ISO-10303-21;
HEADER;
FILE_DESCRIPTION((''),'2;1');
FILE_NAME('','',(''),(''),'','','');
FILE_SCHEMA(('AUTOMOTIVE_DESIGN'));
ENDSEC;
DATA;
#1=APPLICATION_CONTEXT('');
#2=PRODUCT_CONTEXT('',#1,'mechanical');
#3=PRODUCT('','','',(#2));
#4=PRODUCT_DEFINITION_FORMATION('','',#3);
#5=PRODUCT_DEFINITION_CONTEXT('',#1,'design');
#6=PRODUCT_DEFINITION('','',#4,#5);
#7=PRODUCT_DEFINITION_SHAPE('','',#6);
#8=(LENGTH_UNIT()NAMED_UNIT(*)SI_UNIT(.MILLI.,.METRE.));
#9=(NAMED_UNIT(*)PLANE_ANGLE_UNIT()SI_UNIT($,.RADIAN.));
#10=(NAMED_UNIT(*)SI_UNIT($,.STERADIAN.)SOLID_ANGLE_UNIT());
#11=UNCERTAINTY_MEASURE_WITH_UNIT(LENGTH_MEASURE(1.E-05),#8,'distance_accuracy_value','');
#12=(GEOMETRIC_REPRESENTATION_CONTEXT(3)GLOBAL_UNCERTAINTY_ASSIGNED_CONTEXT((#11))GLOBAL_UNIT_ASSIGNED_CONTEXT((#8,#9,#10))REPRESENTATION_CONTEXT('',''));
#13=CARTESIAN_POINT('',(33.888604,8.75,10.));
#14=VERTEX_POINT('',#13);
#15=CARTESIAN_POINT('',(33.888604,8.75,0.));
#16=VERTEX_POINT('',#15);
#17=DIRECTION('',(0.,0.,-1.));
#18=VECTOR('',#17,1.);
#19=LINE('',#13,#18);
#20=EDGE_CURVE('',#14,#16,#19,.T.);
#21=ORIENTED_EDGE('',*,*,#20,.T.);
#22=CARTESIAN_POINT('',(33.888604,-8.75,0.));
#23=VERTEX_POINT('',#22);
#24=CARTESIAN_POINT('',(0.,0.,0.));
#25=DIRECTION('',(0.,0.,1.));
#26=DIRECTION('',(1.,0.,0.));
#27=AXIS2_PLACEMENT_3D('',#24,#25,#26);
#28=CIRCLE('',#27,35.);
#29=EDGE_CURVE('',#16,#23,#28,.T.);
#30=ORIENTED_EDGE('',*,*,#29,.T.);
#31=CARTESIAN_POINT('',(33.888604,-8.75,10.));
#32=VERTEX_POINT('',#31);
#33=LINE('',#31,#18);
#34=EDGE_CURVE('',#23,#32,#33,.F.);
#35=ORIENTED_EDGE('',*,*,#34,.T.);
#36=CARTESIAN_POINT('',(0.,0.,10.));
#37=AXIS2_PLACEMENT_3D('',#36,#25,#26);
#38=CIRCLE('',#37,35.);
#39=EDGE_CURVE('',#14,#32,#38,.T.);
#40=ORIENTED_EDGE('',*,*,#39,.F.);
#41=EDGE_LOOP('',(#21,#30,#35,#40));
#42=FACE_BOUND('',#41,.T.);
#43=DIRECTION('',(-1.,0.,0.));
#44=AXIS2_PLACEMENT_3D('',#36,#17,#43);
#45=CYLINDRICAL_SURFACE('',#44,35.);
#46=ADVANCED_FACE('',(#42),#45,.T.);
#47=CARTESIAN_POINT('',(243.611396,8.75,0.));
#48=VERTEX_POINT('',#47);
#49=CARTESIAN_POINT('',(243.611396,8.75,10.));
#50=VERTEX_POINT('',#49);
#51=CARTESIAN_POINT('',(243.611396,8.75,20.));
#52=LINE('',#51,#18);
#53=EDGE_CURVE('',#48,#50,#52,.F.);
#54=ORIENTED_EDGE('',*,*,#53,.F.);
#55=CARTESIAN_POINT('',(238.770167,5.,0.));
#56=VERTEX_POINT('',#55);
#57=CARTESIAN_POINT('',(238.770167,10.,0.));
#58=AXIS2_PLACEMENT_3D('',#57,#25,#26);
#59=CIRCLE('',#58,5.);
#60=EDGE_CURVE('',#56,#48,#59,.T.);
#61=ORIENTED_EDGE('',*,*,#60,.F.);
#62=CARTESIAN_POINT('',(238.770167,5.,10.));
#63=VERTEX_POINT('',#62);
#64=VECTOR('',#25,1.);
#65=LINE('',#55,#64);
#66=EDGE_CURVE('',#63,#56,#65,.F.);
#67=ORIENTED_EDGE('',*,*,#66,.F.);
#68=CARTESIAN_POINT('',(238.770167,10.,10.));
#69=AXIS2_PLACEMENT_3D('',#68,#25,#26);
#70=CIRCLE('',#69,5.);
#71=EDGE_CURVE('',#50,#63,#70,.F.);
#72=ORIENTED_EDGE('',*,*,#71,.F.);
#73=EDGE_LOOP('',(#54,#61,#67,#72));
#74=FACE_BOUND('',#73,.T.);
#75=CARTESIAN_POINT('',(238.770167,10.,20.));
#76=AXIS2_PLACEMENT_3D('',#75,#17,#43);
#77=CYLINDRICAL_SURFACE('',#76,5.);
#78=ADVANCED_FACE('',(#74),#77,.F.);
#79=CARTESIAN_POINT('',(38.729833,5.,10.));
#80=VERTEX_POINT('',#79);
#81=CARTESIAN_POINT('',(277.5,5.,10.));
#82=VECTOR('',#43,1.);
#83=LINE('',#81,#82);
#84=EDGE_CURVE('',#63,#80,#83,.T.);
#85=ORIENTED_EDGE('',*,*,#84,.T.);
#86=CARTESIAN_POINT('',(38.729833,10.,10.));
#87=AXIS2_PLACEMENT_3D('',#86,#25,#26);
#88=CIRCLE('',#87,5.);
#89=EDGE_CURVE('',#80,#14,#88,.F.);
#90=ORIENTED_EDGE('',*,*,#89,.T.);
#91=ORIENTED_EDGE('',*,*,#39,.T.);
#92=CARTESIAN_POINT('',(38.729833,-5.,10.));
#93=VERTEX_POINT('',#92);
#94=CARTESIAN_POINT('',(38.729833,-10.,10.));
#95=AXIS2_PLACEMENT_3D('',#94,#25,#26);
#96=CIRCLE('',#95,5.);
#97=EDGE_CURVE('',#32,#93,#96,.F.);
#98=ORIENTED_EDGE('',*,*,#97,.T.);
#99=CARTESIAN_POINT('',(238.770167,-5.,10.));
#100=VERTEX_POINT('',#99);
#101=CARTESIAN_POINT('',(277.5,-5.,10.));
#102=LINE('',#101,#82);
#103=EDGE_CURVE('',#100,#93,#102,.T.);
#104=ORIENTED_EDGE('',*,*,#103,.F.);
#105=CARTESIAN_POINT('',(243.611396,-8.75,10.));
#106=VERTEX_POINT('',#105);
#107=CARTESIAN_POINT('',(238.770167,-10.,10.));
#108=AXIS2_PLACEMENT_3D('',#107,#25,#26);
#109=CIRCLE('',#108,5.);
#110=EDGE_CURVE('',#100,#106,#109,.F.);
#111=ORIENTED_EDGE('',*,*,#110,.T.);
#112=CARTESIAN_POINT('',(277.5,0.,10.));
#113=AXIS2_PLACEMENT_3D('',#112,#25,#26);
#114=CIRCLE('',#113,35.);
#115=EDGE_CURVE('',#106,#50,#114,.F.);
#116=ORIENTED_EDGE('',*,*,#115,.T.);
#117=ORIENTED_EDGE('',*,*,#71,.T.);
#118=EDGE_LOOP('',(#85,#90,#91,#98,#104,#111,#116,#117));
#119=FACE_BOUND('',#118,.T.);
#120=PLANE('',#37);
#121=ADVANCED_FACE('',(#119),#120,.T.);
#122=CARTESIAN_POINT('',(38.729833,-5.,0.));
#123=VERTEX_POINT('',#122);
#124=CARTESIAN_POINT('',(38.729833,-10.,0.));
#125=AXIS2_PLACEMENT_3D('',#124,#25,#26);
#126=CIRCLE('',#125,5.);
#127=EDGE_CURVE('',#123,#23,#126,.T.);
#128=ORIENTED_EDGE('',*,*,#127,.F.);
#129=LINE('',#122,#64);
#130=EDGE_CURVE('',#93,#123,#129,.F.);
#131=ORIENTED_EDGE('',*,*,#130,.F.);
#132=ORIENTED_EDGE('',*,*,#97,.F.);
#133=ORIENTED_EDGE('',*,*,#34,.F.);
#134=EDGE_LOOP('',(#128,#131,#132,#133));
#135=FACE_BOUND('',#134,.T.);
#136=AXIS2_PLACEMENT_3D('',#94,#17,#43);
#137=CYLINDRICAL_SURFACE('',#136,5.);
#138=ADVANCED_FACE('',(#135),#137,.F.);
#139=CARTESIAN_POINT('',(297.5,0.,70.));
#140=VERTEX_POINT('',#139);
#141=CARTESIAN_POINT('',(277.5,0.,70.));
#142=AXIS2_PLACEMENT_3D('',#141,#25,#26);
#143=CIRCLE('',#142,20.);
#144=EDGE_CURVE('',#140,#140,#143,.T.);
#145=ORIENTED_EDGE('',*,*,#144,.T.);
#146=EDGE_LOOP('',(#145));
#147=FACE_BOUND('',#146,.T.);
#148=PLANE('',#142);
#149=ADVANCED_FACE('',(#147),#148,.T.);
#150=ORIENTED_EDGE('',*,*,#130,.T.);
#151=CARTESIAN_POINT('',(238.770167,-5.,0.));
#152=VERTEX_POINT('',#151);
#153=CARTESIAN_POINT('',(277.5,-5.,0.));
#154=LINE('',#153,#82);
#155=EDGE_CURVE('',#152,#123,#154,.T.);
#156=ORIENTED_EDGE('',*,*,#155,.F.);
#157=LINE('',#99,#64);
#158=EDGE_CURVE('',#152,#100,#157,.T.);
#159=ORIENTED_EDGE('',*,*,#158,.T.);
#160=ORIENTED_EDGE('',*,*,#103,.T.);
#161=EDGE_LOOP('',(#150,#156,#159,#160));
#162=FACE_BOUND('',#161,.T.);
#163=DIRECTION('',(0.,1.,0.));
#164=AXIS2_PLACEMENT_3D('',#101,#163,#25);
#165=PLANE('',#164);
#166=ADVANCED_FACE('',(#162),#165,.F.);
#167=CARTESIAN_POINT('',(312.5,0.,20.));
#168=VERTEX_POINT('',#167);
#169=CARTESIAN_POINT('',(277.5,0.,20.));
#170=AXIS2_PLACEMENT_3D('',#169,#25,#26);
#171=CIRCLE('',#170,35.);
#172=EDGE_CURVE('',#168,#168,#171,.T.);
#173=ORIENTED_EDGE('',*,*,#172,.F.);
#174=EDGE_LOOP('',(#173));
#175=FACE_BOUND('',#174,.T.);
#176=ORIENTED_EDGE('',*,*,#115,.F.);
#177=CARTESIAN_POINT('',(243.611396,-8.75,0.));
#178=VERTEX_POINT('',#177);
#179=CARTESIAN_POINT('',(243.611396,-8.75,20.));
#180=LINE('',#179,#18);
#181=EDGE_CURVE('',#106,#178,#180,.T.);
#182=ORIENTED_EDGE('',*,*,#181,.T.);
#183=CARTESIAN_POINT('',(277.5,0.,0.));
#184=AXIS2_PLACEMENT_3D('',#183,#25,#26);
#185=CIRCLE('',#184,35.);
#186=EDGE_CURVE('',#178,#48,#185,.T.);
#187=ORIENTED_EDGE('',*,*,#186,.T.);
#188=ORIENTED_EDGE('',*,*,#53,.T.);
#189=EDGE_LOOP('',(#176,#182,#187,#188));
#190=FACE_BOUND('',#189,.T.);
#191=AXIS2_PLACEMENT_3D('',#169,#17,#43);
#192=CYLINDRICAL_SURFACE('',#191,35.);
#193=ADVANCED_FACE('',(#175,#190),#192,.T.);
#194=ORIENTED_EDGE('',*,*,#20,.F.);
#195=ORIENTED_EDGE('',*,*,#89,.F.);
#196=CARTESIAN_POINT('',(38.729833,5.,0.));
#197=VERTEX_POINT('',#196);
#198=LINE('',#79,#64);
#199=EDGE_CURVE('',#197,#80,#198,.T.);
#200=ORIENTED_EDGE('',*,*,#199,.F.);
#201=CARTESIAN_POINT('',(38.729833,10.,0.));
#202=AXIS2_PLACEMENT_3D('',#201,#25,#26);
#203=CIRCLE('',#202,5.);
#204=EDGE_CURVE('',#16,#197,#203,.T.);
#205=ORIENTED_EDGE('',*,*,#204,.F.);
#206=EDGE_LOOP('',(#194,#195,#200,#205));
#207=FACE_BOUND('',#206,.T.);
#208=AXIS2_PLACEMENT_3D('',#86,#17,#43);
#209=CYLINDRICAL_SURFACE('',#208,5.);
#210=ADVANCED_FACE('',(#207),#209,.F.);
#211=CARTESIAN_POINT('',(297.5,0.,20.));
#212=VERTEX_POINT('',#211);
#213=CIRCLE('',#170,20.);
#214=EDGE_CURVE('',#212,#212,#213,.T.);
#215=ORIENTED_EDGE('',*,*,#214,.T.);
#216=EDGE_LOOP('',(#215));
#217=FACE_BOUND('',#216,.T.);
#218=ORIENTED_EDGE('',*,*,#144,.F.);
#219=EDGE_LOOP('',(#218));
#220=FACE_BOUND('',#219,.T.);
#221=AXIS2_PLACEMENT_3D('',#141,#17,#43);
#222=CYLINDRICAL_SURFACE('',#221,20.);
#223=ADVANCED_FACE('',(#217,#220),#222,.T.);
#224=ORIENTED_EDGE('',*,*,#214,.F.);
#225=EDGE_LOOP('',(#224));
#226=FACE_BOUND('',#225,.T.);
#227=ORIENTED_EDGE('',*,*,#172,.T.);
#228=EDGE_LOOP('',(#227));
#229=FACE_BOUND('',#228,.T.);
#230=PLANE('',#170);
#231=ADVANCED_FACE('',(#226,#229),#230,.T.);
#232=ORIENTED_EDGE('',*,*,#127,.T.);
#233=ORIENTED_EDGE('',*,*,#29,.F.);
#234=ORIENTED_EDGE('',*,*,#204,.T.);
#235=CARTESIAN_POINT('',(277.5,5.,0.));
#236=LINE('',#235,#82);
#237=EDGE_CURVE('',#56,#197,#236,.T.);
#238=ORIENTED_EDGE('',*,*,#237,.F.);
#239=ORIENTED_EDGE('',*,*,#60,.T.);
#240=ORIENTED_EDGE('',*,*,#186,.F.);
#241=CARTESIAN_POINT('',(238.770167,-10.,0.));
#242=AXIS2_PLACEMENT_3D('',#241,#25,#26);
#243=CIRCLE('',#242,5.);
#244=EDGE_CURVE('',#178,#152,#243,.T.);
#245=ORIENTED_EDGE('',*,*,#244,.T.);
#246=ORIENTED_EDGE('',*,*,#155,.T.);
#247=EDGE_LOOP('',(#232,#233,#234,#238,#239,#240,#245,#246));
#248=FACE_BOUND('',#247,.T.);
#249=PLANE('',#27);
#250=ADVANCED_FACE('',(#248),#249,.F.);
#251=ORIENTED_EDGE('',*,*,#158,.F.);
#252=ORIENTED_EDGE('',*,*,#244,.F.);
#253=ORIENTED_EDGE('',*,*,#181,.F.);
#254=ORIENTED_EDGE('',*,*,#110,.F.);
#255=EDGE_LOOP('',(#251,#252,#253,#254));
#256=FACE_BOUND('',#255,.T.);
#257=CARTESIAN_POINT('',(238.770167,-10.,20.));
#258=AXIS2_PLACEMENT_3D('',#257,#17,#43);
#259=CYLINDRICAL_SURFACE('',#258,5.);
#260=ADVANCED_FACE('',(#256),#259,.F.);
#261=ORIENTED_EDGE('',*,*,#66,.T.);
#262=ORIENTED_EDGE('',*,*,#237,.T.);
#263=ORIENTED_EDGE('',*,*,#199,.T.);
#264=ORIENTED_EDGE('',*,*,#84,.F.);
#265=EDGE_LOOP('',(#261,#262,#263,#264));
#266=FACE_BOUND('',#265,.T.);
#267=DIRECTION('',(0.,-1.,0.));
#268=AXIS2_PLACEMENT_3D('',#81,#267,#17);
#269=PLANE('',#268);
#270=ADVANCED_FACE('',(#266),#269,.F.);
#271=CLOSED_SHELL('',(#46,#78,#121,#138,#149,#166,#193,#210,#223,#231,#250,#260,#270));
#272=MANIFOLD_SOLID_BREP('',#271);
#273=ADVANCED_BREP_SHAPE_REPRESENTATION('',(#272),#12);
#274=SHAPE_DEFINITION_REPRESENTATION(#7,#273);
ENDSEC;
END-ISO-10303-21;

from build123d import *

# Parameters (mm, degrees)
ESBO_O1_R                     = 35
RESSALTO_EXTRUS_O1_DEPTH      = 10
ESBO_O4_W                     = 10
ESBO_O4_H                     = 10
RESSALTO_EXTRUS_O2_DEPTH      = 277.5
FILETE3_R                     = 5
FILETE4_R                     = 5
RESSALTO_EXTRUS_O3_DEPTH      = 10
RESSALTO_EXTRUS_O3_DEPTH_BACK = 10
ESBO_O6_R                     = 35
FILETE5_R                     = 5
FILETE6_R                     = 5
ESBO_O7_R                     = 20
RESSALTO_EXTRUS_O4_DEPTH      = 50


with BuildPart() as part:
    # Esboço1 → Ressalto-extrusão1 (new body)
    with BuildSketch(Plane(origin=(0, 0, 0), x_dir=(0, 1, 0), z_dir=(0, 0, 1))):
        with Locations(Location((0, 0, 0), (0, 0, 270))):
            Circle(ESBO_O1_R)
    extrude(amount=RESSALTO_EXTRUS_O1_DEPTH)

    # Esboço4 → Ressalto-extrusão2 (add)
    with BuildSketch(Plane.YZ):
        with Locations((0, 5)):
            Rectangle(ESBO_O4_W, ESBO_O4_H)
    extrude(amount=RESSALTO_EXTRUS_O2_DEPTH)

    # Filete3
    filete3_edges = [part.edges().sort_by_distance(p)[0] for p in [
        (34.641016151, -5, 5),
    ]]
    fillet(filete3_edges, radius=FILETE3_R)

    # Filete4
    filete4_edges = [part.edges().sort_by_distance(p)[0] for p in [
        (34.641016151, 5, 5),
    ]]
    fillet(filete4_edges, radius=FILETE4_R)

    # Esboço6 → Ressalto-extrusão3 (add, two sides: drawn at the far end of the back side and taken through both)
    with BuildSketch(Plane.XY.offset(10).offset(-RESSALTO_EXTRUS_O3_DEPTH_BACK)):
        with Locations(Location((277.5, 0, 0), (0, 0, 171.786789298))):
            Circle(ESBO_O6_R)
    extrude(amount=RESSALTO_EXTRUS_O3_DEPTH + RESSALTO_EXTRUS_O3_DEPTH_BACK)

    # Filete5
    filete5_edges = [part.edges().sort_by_distance(p)[0] for p in [
        (242.858983849, -5, 5),
    ]]
    fillet(filete5_edges, radius=FILETE5_R)

    # Filete6
    # the kernel refuses this fillet: 5 mm, written as the material it adds along each edge
    with BuildSketch(Plane(origin=(242.858983849, 5, 10), x_dir=(0.1967224418008006, 0.9804592193925918, 0), z_dir=(0, 0, -1))) as filete6_piece_1:
        with BuildLine():
            CenterArc((4.097933971, -4.992530838), FILETE6_R, 93.132150742, 75.522487814)
            Line((-0.804362126, -4.008918629), (0, 0))
            ThreePointArc((0, 0), (1.912369187, -0.052284136), (3.824738373, 0))
        make_face()
    extrude(amount=10)

    # Esboço7 → Ressalto-extrusão4 (add)
    with BuildSketch(Plane.XY.offset(20)):
        with Locations((277.5, 0)):
            Circle(ESBO_O7_R)
    extrude(amount=RESSALTO_EXTRUS_O4_DEPTH)


solid = part.part
